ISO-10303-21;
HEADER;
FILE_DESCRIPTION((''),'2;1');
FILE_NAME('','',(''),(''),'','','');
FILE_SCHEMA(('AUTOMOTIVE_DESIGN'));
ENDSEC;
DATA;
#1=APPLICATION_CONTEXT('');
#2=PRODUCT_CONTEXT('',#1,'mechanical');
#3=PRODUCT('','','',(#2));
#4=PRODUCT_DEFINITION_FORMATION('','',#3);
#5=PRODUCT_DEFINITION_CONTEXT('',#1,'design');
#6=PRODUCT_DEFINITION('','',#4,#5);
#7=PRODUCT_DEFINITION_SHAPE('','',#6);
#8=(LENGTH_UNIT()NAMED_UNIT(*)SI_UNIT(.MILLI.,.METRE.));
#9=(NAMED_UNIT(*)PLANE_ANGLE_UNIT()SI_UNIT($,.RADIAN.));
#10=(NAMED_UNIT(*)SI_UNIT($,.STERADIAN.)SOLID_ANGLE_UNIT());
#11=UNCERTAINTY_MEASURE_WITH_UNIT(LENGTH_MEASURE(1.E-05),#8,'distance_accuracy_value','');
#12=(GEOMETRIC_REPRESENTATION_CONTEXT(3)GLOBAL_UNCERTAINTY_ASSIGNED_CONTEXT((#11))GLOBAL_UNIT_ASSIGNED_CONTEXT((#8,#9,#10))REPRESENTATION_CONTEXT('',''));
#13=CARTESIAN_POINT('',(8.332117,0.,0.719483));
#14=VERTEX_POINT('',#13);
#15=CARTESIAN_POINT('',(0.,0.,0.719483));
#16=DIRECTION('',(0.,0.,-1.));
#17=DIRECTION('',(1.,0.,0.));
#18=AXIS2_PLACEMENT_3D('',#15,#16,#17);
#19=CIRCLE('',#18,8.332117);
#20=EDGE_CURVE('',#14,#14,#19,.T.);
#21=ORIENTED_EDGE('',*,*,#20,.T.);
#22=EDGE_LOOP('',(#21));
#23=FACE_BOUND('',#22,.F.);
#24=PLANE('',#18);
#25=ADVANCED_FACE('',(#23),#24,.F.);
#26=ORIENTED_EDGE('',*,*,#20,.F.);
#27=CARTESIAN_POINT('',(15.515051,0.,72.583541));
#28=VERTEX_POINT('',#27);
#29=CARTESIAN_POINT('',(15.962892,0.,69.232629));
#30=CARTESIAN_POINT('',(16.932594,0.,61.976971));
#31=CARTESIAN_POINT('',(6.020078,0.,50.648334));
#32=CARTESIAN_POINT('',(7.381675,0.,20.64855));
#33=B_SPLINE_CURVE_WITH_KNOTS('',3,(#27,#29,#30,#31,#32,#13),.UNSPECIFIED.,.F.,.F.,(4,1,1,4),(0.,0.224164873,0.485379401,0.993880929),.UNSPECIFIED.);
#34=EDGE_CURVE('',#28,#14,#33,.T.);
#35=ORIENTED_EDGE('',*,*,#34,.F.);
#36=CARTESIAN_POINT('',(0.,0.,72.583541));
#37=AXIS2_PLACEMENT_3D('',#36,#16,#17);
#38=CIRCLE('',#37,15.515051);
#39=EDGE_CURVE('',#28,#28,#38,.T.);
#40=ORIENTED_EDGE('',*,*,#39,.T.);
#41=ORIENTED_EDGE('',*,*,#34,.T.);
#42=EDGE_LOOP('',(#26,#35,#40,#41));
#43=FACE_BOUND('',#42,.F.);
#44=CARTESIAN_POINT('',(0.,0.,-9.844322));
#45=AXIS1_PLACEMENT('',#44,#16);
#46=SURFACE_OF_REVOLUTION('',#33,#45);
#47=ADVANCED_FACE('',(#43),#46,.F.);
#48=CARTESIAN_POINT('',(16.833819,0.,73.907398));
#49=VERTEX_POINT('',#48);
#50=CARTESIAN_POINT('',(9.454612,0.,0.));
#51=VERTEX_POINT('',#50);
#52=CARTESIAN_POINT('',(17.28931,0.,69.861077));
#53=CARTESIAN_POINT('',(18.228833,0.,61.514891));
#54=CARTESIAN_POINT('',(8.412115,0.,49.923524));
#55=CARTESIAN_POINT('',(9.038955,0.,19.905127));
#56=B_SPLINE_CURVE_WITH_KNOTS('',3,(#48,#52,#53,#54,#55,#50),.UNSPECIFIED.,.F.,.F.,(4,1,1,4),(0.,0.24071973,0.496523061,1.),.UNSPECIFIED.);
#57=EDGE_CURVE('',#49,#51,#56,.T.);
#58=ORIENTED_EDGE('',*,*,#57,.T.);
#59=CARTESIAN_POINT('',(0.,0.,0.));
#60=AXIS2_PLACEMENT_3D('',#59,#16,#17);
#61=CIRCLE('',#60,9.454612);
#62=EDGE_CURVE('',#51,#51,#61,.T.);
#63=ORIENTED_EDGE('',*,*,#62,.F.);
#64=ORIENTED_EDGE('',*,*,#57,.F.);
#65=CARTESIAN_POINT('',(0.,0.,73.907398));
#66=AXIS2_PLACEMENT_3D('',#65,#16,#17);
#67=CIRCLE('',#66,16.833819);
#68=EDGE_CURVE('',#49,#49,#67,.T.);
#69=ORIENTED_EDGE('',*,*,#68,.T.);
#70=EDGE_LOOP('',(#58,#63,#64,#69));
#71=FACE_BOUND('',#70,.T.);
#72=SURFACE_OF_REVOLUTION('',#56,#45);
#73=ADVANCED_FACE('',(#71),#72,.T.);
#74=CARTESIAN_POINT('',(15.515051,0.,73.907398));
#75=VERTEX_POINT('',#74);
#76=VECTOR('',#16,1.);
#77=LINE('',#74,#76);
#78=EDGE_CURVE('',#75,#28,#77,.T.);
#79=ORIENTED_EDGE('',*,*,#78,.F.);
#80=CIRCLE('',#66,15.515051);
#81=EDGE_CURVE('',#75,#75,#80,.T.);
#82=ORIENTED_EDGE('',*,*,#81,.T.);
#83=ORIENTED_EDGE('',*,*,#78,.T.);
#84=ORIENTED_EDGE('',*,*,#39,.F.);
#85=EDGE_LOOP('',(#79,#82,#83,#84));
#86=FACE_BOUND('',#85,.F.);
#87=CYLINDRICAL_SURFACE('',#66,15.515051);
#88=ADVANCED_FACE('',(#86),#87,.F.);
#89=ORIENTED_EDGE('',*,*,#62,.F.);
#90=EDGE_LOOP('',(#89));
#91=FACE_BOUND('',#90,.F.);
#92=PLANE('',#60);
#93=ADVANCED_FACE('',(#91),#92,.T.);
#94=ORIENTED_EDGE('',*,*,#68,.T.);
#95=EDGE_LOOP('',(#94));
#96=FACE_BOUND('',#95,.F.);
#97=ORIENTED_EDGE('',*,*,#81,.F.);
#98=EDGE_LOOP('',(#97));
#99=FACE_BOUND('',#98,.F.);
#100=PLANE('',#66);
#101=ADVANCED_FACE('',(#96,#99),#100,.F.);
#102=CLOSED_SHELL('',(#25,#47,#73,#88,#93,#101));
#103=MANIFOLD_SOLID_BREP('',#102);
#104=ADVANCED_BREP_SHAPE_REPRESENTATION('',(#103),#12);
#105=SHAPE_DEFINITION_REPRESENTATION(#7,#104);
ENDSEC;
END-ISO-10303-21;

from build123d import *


with BuildPart() as f1:
    # F0 (on Front) → F1 (revolve)
    with BuildSketch(Plane.XZ):
        with BuildLine():
            Line((16.8338194489, 73.9073976874), (15.5150508508, 73.9073976874))
            Line((15.5150508508, 73.9073976874), (15.5150508508, 72.5835412741))
            add(Edge.make_bspline(
                [(15.5150508508, 72.5835412741), (15.9628923537, 69.2326291989), (16.9325939715, 61.9769710258), (6.0200782442, 50.6483344758), (7.3816749001, 20.6485499873), (8.3321169346, 0.7194833016)],
                knots=[0, 0, 0, 0, 0.2241648732, 0.4853794006, 0.9938809288, 0.9938809288, 0.9938809288, 0.9938809288], degree=3))
            add(Edge.make_bspline(
                [(8.3321169346, 0.7194833016), (8.3435541127, 0.4796661682), (8.3549986647, 0.2398330841), (8.3664432168, 0)],
                knots=[0.9938809288, 0.9938809288, 0.9938809288, 0.9938809288, 1, 1, 1, 1], degree=3))
            Line((8.3664432168, 0), (9.4546116889, 0))
            add(Edge.make_bspline(
                [(16.8338194489, 73.9073976874), (17.2893102356, 69.8610769677), (18.2288330573, 61.5148913338), (8.4121151546, 49.9235241023), (9.0389554089, 19.9051273823), (9.4546116889, 0)],
                knots=[0, 0, 0, 0, 0.2407197295, 0.4965230607, 1, 1, 1, 1], degree=3))
        make_face()
        with BuildLine():
            add(Edge.make_bspline(
                [(8.3321169346, 0.7194833016), (8.3435541127, 0.4796661682), (8.3549986647, 0.2398330841), (8.3664432168, 0)],
                knots=[0.9938809288, 0.9938809288, 0.9938809288, 0.9938809288, 1, 1, 1, 1], degree=3))
            Line((8.3321169346, 0.7194833016), (0, 0.7194833016))
            Line((0, 0.7194833016), (0, 0))
            Line((0, 0), (8.3664432168, 0))
        make_face()
    revolve(axis=Axis((0, 0, -9.8443220777), (0, 0, -1)))


solid = f1.part
